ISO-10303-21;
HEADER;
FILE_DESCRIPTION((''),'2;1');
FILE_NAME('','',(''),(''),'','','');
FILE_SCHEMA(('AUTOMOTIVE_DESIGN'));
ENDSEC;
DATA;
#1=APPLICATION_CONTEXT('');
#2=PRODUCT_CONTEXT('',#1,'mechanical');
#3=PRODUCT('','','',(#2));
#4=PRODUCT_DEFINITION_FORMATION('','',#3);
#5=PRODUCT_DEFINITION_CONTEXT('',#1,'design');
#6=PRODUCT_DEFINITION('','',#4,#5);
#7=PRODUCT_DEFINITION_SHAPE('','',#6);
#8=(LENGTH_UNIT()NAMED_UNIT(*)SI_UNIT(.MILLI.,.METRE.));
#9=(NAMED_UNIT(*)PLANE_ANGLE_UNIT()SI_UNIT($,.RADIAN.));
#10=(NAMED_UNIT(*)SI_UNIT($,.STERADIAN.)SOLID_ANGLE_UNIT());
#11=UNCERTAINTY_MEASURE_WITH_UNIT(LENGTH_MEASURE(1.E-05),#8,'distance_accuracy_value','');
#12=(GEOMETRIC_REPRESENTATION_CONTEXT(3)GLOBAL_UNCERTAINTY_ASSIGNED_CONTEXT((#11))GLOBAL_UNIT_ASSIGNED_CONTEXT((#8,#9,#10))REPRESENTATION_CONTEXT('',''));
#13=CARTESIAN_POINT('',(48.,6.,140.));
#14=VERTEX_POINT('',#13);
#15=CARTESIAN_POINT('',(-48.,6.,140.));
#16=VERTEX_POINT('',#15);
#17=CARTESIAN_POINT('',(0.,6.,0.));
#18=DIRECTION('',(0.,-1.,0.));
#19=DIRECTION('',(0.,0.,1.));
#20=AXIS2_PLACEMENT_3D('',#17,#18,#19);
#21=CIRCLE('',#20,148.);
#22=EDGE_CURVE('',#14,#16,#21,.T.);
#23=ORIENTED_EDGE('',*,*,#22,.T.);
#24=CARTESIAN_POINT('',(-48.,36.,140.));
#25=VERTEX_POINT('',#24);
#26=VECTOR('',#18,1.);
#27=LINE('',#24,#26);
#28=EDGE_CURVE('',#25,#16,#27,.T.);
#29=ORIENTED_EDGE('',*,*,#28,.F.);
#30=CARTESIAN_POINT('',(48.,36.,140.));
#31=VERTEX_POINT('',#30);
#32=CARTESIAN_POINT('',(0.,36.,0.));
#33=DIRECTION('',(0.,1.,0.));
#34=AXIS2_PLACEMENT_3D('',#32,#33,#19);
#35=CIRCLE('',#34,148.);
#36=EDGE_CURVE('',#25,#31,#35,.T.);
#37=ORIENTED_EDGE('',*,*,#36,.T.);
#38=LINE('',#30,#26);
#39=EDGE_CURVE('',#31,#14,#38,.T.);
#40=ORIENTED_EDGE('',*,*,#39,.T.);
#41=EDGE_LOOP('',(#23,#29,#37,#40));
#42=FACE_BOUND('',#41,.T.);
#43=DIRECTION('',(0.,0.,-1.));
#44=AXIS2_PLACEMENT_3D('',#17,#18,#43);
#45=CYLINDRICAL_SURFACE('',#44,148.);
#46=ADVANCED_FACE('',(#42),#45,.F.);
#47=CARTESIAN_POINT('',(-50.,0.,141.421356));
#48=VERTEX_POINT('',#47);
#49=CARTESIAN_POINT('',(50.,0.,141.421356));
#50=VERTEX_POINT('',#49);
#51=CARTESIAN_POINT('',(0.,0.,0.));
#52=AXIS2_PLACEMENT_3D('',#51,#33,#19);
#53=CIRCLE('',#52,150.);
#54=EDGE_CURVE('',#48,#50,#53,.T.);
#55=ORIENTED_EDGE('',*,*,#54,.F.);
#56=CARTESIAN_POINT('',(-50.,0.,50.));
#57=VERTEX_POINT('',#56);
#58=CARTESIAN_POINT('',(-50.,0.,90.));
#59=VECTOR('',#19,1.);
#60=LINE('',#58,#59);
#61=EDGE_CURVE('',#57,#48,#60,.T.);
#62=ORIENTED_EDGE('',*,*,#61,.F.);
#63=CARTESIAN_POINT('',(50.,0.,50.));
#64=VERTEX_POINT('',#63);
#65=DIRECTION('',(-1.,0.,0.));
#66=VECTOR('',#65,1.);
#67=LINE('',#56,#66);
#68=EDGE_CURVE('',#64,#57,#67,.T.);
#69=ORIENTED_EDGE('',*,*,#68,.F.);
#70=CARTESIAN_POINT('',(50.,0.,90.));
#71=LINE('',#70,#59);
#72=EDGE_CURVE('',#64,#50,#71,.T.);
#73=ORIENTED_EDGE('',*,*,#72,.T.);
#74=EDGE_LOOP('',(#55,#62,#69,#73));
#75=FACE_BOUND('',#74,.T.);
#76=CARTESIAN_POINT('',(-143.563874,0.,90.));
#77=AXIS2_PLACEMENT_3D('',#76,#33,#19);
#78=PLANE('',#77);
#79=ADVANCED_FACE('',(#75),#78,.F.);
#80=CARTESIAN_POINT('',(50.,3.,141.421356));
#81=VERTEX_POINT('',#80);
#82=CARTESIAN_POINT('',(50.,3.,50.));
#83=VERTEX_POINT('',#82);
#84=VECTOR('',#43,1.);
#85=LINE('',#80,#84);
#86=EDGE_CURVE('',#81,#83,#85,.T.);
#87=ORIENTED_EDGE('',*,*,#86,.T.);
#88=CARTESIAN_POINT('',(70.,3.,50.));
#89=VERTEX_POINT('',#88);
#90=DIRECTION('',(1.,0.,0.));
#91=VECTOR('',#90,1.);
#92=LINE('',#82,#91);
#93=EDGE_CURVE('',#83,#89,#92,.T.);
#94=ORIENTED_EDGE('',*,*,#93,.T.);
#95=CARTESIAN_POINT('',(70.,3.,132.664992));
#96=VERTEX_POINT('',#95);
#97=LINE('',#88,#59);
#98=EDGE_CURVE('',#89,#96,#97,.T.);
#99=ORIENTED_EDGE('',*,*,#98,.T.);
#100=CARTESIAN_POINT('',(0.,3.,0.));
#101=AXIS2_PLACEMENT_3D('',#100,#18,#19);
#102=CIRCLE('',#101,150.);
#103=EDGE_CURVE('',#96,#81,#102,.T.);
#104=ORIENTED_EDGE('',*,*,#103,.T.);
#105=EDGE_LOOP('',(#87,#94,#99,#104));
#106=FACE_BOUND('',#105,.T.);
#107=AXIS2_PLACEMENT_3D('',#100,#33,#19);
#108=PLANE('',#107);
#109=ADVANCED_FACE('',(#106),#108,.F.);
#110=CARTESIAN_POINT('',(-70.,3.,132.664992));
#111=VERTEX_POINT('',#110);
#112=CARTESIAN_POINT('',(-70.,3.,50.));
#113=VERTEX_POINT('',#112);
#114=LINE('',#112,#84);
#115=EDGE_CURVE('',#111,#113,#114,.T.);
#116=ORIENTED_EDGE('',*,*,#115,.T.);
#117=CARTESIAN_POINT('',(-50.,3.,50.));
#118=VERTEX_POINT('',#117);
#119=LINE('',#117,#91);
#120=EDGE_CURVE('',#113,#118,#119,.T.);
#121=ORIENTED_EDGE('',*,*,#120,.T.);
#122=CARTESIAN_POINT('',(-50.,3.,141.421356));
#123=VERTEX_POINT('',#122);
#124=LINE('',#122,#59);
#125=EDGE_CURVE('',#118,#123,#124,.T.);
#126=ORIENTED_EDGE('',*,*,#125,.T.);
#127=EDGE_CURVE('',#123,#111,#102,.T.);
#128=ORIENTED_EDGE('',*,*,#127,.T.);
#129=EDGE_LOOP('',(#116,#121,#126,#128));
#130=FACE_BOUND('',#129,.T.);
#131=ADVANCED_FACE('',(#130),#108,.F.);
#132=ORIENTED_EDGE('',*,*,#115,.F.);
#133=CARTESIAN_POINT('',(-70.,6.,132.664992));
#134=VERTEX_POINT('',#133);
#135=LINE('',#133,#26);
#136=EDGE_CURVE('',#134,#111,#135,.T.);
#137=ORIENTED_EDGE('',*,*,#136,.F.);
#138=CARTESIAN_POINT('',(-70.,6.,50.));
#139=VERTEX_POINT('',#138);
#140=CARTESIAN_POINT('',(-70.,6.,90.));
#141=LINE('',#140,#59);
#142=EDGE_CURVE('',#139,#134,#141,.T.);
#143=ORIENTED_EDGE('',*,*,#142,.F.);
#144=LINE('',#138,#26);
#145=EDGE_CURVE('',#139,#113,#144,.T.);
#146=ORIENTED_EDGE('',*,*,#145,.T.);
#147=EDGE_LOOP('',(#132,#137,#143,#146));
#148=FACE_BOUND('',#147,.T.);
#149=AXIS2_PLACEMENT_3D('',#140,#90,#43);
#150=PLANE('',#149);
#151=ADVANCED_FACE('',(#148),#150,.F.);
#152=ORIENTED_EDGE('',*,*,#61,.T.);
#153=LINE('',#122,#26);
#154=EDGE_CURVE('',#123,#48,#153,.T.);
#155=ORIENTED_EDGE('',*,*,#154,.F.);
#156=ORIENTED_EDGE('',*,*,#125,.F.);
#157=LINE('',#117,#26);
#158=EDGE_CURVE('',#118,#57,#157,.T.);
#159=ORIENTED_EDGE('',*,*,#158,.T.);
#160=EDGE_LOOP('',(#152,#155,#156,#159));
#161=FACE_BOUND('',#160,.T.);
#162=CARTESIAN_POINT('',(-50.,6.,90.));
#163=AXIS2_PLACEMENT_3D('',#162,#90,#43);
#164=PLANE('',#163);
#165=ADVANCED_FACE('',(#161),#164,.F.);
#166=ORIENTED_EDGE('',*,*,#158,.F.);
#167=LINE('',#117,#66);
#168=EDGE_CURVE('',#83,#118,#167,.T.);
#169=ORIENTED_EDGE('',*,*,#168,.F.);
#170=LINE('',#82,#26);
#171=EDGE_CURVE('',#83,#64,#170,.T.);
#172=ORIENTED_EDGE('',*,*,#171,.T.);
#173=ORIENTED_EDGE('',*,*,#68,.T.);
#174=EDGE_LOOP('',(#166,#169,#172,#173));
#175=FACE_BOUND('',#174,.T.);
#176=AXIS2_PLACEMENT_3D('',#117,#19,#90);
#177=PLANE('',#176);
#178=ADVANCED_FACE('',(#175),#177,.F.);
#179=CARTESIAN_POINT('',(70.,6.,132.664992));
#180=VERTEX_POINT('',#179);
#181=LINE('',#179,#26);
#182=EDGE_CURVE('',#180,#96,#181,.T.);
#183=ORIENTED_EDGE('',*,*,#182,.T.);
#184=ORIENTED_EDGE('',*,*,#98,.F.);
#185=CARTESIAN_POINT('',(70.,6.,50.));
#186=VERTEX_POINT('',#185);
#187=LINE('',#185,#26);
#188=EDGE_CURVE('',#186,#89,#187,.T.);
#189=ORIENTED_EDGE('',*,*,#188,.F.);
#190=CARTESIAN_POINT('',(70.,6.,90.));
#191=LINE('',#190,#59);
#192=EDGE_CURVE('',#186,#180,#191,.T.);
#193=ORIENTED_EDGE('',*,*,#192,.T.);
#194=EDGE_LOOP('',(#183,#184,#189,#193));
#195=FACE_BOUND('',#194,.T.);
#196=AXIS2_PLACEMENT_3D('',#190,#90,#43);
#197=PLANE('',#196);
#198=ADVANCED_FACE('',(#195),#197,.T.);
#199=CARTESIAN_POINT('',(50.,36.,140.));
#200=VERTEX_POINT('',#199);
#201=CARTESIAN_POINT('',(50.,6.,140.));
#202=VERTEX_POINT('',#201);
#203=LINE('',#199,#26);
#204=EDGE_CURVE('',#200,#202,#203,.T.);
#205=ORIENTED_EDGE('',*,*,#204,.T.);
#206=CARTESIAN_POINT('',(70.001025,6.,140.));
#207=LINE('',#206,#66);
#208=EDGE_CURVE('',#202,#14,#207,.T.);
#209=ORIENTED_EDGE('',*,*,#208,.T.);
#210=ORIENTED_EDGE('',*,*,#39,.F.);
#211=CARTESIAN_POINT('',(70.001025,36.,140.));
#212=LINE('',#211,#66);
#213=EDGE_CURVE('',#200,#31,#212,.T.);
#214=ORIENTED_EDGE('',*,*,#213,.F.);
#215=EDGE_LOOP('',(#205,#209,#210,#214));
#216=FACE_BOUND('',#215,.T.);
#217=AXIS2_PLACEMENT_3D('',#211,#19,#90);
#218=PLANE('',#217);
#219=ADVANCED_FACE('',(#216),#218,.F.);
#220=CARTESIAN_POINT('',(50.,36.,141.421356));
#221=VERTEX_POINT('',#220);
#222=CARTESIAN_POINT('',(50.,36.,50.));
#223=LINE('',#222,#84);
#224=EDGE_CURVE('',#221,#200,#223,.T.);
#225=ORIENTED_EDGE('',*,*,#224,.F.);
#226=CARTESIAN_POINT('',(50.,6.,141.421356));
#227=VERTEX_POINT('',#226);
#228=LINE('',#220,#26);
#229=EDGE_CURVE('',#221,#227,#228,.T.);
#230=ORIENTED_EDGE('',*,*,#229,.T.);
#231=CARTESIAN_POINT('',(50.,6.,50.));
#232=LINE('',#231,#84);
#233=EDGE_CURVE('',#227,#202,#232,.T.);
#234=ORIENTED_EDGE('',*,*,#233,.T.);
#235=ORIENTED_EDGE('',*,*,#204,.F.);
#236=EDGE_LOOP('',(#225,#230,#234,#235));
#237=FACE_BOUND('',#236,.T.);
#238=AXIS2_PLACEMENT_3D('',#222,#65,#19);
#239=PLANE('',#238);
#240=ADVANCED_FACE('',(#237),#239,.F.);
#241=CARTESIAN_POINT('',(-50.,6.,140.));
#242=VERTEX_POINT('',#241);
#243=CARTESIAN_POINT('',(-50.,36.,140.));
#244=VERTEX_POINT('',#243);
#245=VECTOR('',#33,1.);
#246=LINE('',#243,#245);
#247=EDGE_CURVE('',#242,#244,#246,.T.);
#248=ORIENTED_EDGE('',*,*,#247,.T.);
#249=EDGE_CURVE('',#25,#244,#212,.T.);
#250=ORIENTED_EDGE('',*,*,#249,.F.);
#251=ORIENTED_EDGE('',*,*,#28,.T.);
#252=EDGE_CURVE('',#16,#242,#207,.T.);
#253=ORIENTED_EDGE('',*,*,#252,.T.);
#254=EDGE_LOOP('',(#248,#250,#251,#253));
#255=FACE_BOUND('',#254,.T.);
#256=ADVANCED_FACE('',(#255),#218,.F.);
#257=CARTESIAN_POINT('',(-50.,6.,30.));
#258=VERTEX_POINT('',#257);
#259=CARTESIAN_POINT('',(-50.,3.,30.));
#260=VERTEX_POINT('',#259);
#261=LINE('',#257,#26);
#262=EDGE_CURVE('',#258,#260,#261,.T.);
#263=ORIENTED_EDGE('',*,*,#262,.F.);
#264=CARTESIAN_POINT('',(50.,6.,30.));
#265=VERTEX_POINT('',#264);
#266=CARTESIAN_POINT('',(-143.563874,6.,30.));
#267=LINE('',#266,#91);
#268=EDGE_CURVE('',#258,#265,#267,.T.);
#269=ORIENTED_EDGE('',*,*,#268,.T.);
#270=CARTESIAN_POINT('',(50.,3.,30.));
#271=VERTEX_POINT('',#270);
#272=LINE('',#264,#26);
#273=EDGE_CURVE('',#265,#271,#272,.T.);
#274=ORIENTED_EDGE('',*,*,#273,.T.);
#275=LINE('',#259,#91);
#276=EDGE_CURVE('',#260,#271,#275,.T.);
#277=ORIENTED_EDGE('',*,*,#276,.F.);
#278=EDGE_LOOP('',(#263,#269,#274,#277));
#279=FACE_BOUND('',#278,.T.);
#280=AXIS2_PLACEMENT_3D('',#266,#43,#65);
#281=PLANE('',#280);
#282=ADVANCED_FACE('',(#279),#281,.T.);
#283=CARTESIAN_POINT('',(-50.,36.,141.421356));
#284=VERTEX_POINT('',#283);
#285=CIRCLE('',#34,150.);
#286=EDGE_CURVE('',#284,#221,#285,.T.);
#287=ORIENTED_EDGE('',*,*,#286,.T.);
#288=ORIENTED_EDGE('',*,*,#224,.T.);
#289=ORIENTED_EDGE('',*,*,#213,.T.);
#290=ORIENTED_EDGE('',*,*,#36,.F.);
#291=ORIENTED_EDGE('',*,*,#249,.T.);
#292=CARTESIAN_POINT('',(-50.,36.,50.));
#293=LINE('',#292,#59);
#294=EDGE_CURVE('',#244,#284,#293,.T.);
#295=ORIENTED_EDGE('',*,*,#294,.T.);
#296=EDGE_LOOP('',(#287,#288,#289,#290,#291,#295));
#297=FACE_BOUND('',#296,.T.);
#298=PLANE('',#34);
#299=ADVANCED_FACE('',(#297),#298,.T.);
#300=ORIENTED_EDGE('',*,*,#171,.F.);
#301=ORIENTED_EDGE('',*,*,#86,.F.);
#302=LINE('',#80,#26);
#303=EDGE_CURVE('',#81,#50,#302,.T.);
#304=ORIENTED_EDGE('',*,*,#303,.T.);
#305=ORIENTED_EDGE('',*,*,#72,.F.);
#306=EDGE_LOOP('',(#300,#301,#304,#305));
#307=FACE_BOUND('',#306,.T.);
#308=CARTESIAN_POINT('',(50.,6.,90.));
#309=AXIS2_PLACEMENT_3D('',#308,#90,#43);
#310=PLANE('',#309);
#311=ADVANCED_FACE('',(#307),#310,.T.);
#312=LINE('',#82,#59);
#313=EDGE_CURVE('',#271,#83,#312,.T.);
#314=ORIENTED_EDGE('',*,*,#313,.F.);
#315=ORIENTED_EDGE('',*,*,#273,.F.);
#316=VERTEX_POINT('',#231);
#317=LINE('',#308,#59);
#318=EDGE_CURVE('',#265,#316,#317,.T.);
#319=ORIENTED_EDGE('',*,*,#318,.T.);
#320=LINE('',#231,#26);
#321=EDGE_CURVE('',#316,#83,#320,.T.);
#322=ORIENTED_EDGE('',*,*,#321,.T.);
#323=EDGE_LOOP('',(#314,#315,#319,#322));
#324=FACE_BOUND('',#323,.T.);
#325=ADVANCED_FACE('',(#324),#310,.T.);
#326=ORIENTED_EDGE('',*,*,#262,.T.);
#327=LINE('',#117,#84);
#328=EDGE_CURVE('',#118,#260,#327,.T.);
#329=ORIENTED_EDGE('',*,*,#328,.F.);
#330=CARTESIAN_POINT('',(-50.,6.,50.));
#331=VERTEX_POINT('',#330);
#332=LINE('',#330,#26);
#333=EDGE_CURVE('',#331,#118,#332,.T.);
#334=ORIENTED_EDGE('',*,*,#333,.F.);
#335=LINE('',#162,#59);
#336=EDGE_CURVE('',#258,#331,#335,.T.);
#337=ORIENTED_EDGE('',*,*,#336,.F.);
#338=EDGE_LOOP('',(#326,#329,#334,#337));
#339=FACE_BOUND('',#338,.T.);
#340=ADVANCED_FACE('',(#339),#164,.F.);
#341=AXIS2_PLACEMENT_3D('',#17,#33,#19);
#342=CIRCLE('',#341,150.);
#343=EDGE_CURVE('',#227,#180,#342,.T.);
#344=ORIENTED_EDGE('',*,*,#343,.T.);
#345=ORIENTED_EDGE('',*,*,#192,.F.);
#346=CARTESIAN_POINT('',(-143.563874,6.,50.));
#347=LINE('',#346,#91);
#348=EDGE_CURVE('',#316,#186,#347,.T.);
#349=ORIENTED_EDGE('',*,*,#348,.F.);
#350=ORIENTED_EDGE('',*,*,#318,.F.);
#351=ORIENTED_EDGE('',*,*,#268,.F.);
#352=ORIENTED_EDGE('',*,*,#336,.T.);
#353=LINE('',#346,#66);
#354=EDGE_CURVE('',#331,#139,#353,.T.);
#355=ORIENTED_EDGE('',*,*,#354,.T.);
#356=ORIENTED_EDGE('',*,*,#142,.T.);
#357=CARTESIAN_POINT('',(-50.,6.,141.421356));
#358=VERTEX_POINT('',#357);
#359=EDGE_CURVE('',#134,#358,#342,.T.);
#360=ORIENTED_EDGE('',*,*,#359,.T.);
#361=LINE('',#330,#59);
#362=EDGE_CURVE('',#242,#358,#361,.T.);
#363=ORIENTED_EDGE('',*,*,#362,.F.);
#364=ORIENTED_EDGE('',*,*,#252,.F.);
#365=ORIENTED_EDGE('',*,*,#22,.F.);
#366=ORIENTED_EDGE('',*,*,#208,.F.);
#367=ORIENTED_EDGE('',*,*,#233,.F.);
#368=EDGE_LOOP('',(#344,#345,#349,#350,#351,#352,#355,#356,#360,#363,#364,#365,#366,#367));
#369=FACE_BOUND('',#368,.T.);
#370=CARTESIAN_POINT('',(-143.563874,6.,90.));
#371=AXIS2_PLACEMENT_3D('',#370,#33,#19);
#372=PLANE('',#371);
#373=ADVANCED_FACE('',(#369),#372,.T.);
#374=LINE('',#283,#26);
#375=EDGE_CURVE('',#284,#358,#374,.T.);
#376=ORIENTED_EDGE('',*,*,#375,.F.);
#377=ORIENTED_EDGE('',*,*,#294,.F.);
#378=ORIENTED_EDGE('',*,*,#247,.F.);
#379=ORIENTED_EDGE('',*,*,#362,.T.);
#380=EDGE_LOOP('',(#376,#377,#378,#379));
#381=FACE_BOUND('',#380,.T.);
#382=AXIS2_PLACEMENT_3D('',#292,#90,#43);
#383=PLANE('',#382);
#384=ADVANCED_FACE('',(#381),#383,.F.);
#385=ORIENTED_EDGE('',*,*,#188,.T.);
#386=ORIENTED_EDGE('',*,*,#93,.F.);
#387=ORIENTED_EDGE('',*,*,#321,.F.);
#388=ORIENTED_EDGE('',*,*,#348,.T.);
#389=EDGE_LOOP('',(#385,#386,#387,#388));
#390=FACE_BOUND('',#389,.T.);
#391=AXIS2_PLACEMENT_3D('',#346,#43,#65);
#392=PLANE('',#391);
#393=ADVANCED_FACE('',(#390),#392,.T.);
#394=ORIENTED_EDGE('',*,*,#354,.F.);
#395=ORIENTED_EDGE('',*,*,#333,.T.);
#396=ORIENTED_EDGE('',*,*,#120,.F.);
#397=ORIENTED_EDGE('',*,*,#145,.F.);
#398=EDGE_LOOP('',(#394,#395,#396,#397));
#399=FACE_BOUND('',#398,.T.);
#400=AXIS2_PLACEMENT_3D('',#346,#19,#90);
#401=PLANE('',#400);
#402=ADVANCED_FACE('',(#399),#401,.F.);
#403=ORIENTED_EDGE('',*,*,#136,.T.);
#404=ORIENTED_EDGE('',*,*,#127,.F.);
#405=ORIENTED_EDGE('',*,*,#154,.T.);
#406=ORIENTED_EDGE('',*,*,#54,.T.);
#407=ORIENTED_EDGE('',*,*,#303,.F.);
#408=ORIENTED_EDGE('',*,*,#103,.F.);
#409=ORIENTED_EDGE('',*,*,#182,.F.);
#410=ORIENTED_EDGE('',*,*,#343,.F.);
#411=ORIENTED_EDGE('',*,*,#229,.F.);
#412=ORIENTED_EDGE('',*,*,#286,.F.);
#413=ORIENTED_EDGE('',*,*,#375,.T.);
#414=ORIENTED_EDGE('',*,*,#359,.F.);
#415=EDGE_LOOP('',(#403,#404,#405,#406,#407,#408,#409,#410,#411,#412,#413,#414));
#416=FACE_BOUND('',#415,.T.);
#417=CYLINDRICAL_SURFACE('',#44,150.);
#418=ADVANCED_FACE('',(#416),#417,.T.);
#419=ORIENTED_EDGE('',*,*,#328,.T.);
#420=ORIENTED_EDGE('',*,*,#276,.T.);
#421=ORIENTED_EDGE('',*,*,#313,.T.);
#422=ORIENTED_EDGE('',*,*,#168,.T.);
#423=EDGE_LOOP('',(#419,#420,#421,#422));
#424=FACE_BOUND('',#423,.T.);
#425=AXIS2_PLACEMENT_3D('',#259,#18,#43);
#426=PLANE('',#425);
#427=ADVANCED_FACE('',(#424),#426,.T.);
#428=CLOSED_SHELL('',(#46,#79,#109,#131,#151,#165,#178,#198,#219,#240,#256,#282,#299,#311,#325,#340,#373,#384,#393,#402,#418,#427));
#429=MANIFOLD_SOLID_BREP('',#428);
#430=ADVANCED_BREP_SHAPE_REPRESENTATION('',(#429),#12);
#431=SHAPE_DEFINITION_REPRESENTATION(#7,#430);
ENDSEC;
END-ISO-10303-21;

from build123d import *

# Parameters (mm, degrees)
BOSS_EXTRUDE1_DEPTH = 6
BOSS_EXTRUDE2_DEPTH = 30
CUT_EXTRUDE1_DEPTH  = 3
CUT_EXTRUDE2_DEPTH  = 3
SKETCH6_W           = 100
SKETCH6_H           = 20
CUT_EXTRUDE3_DEPTH  = 3
SHELL4_START        = 2
SHELL4_DEPTH        = 34
CUT_EXTRUDE4_REACH  = 197.438
SKETCH7_W           = 90
SKETCH7_H           = 30
BOSS_EXTRUDE3_DEPTH = 6


# Read off the part's stored shape, not the designer's step: Shell4
with BuildPart() as part:
    # Sketch2 → Boss-Extrude1 (new body)
    with BuildSketch(Plane(origin=(0, 0, 0), x_dir=(1, 0, 0), z_dir=(0, 1, 0))):
        with BuildLine():
            Line((50, -50), (0, -50))
            Line((0, -50), (-50, -50))
            Line((-50, -50), (-50, -141.421356237))
            ThreePointArc((-50, -141.421356237), (0, -150), (50, -141.421356237))
            Line((50, -141.421356237), (50, -50))
        make_face()
        with BuildLine():
            Line((-50, -141.421356237), (-50, -50))
            Line((-50, -50), (-70, -50))
            Line((-70, -50), (-70, -132.664991614))
            ThreePointArc((-70, -132.664991614), (-60.159525267, -137.407538074), (-50, -141.421356237))
        make_face()
        with BuildLine():
            Line((70, -50), (50, -50))
            Line((50, -50), (50, -141.421356237))
            ThreePointArc((50, -141.421356237), (60.159525267, -137.407538074), (70, -132.664991614))
            Line((70, -132.664991614), (70, -50))
        make_face()
        Polygon((-50, -50), (0, -50), (50, -50), (50, -30), (-50, -30), align=None)
    extrude(amount=BOSS_EXTRUDE1_DEPTH)

    # Sketch3 → Boss-Extrude2 (add)
    with BuildSketch(Plane(origin=(0, 6, 0), x_dir=(-1, 0, 0), z_dir=(0, 1, 0))):
        with BuildLine():
            Line((50, 50), (-50, 50))
            Line((-50, 50), (-50, 141.421356237))
            ThreePointArc((-50, 141.421356237), (0, 150), (50, 141.421356237))
            Line((50, 141.421356237), (50, 50))
        make_face()
    extrude(amount=BOSS_EXTRUDE2_DEPTH)

    # Sketch4 → Cut-Extrude1 (cut)
    with BuildSketch(Plane.XZ):
        with BuildLine():
            Line((-50, 141.421356237), (-50, 50))
            Line((-50, 50), (-70, 50))
            Line((-70, 50), (-70, 132.664991614))
            ThreePointArc((-70, 132.664991614), (-60.159525267, 137.407538074), (-50, 141.421356237))
        make_face()
    extrude(amount=-CUT_EXTRUDE1_DEPTH, mode=Mode.SUBTRACT)

    # Sketch5 → Cut-Extrude2 (cut)
    with BuildSketch(Plane.XZ):
        with BuildLine():
            Line((50, 141.421356237), (50, 50))
            Line((50, 50), (70, 50))
            Line((70, 50), (70, 132.664991614))
            ThreePointArc((70, 132.664991614), (60.159525267, 137.407538074), (50, 141.421356237))
        make_face()
    extrude(amount=-CUT_EXTRUDE2_DEPTH, mode=Mode.SUBTRACT)

    # Sketch6 → Cut-Extrude3 (cut)
    with BuildSketch(Plane.XZ):
        with Locations((0, 40)):
            Rectangle(SKETCH6_W, SKETCH6_H)
    extrude(amount=-CUT_EXTRUDE3_DEPTH, mode=Mode.SUBTRACT)

    # Shell4 outline → Shell4 (cut)
    with BuildSketch(Plane(origin=(0, 0, 0), x_dir=(1, 0, 0), z_dir=(0, 1, 0)).offset(SHELL4_START)):
        with BuildLine():
            Line((-48, -52), (-48, -140))
            ThreePointArc((-48, -140), (0, -148), (48, -140))
            Line((48, -140), (48, -52))
            Line((48, -52), (-48, -52))
        make_face()
    extrude(amount=SHELL4_DEPTH, mode=Mode.SUBTRACT)

    # Sketch7 → Cut-Extrude4 (cut, up to next)
    with BuildSketch(Plane.ZY.offset(50), mode=Mode.PRIVATE) as cut_extrude4_sk1:
        with Locations((95, 21)):
            Rectangle(SKETCH7_W, SKETCH7_H)
    cut_extrude4_tool1 = extrude(cut_extrude4_sk1.sketch, amount=-CUT_EXTRUDE4_REACH, mode=Mode.PRIVATE) & part.part
    add(cut_extrude4_tool1.solids().sort_by_distance((-50, 21, 95))[0], mode=Mode.SUBTRACT)

    # Sketch8 → Boss-Extrude3 (add)
    with BuildSketch(Plane.XZ):
        with BuildLine():
            Line((-48, 140), (-48, 52))
            Line((-48, 52), (48, 52))
            Line((48, 52), (48, 140))
            ThreePointArc((48, 140), (0, 148), (-48, 140))
        make_face()
    extrude(amount=-BOSS_EXTRUDE3_DEPTH)


solid = part.part
